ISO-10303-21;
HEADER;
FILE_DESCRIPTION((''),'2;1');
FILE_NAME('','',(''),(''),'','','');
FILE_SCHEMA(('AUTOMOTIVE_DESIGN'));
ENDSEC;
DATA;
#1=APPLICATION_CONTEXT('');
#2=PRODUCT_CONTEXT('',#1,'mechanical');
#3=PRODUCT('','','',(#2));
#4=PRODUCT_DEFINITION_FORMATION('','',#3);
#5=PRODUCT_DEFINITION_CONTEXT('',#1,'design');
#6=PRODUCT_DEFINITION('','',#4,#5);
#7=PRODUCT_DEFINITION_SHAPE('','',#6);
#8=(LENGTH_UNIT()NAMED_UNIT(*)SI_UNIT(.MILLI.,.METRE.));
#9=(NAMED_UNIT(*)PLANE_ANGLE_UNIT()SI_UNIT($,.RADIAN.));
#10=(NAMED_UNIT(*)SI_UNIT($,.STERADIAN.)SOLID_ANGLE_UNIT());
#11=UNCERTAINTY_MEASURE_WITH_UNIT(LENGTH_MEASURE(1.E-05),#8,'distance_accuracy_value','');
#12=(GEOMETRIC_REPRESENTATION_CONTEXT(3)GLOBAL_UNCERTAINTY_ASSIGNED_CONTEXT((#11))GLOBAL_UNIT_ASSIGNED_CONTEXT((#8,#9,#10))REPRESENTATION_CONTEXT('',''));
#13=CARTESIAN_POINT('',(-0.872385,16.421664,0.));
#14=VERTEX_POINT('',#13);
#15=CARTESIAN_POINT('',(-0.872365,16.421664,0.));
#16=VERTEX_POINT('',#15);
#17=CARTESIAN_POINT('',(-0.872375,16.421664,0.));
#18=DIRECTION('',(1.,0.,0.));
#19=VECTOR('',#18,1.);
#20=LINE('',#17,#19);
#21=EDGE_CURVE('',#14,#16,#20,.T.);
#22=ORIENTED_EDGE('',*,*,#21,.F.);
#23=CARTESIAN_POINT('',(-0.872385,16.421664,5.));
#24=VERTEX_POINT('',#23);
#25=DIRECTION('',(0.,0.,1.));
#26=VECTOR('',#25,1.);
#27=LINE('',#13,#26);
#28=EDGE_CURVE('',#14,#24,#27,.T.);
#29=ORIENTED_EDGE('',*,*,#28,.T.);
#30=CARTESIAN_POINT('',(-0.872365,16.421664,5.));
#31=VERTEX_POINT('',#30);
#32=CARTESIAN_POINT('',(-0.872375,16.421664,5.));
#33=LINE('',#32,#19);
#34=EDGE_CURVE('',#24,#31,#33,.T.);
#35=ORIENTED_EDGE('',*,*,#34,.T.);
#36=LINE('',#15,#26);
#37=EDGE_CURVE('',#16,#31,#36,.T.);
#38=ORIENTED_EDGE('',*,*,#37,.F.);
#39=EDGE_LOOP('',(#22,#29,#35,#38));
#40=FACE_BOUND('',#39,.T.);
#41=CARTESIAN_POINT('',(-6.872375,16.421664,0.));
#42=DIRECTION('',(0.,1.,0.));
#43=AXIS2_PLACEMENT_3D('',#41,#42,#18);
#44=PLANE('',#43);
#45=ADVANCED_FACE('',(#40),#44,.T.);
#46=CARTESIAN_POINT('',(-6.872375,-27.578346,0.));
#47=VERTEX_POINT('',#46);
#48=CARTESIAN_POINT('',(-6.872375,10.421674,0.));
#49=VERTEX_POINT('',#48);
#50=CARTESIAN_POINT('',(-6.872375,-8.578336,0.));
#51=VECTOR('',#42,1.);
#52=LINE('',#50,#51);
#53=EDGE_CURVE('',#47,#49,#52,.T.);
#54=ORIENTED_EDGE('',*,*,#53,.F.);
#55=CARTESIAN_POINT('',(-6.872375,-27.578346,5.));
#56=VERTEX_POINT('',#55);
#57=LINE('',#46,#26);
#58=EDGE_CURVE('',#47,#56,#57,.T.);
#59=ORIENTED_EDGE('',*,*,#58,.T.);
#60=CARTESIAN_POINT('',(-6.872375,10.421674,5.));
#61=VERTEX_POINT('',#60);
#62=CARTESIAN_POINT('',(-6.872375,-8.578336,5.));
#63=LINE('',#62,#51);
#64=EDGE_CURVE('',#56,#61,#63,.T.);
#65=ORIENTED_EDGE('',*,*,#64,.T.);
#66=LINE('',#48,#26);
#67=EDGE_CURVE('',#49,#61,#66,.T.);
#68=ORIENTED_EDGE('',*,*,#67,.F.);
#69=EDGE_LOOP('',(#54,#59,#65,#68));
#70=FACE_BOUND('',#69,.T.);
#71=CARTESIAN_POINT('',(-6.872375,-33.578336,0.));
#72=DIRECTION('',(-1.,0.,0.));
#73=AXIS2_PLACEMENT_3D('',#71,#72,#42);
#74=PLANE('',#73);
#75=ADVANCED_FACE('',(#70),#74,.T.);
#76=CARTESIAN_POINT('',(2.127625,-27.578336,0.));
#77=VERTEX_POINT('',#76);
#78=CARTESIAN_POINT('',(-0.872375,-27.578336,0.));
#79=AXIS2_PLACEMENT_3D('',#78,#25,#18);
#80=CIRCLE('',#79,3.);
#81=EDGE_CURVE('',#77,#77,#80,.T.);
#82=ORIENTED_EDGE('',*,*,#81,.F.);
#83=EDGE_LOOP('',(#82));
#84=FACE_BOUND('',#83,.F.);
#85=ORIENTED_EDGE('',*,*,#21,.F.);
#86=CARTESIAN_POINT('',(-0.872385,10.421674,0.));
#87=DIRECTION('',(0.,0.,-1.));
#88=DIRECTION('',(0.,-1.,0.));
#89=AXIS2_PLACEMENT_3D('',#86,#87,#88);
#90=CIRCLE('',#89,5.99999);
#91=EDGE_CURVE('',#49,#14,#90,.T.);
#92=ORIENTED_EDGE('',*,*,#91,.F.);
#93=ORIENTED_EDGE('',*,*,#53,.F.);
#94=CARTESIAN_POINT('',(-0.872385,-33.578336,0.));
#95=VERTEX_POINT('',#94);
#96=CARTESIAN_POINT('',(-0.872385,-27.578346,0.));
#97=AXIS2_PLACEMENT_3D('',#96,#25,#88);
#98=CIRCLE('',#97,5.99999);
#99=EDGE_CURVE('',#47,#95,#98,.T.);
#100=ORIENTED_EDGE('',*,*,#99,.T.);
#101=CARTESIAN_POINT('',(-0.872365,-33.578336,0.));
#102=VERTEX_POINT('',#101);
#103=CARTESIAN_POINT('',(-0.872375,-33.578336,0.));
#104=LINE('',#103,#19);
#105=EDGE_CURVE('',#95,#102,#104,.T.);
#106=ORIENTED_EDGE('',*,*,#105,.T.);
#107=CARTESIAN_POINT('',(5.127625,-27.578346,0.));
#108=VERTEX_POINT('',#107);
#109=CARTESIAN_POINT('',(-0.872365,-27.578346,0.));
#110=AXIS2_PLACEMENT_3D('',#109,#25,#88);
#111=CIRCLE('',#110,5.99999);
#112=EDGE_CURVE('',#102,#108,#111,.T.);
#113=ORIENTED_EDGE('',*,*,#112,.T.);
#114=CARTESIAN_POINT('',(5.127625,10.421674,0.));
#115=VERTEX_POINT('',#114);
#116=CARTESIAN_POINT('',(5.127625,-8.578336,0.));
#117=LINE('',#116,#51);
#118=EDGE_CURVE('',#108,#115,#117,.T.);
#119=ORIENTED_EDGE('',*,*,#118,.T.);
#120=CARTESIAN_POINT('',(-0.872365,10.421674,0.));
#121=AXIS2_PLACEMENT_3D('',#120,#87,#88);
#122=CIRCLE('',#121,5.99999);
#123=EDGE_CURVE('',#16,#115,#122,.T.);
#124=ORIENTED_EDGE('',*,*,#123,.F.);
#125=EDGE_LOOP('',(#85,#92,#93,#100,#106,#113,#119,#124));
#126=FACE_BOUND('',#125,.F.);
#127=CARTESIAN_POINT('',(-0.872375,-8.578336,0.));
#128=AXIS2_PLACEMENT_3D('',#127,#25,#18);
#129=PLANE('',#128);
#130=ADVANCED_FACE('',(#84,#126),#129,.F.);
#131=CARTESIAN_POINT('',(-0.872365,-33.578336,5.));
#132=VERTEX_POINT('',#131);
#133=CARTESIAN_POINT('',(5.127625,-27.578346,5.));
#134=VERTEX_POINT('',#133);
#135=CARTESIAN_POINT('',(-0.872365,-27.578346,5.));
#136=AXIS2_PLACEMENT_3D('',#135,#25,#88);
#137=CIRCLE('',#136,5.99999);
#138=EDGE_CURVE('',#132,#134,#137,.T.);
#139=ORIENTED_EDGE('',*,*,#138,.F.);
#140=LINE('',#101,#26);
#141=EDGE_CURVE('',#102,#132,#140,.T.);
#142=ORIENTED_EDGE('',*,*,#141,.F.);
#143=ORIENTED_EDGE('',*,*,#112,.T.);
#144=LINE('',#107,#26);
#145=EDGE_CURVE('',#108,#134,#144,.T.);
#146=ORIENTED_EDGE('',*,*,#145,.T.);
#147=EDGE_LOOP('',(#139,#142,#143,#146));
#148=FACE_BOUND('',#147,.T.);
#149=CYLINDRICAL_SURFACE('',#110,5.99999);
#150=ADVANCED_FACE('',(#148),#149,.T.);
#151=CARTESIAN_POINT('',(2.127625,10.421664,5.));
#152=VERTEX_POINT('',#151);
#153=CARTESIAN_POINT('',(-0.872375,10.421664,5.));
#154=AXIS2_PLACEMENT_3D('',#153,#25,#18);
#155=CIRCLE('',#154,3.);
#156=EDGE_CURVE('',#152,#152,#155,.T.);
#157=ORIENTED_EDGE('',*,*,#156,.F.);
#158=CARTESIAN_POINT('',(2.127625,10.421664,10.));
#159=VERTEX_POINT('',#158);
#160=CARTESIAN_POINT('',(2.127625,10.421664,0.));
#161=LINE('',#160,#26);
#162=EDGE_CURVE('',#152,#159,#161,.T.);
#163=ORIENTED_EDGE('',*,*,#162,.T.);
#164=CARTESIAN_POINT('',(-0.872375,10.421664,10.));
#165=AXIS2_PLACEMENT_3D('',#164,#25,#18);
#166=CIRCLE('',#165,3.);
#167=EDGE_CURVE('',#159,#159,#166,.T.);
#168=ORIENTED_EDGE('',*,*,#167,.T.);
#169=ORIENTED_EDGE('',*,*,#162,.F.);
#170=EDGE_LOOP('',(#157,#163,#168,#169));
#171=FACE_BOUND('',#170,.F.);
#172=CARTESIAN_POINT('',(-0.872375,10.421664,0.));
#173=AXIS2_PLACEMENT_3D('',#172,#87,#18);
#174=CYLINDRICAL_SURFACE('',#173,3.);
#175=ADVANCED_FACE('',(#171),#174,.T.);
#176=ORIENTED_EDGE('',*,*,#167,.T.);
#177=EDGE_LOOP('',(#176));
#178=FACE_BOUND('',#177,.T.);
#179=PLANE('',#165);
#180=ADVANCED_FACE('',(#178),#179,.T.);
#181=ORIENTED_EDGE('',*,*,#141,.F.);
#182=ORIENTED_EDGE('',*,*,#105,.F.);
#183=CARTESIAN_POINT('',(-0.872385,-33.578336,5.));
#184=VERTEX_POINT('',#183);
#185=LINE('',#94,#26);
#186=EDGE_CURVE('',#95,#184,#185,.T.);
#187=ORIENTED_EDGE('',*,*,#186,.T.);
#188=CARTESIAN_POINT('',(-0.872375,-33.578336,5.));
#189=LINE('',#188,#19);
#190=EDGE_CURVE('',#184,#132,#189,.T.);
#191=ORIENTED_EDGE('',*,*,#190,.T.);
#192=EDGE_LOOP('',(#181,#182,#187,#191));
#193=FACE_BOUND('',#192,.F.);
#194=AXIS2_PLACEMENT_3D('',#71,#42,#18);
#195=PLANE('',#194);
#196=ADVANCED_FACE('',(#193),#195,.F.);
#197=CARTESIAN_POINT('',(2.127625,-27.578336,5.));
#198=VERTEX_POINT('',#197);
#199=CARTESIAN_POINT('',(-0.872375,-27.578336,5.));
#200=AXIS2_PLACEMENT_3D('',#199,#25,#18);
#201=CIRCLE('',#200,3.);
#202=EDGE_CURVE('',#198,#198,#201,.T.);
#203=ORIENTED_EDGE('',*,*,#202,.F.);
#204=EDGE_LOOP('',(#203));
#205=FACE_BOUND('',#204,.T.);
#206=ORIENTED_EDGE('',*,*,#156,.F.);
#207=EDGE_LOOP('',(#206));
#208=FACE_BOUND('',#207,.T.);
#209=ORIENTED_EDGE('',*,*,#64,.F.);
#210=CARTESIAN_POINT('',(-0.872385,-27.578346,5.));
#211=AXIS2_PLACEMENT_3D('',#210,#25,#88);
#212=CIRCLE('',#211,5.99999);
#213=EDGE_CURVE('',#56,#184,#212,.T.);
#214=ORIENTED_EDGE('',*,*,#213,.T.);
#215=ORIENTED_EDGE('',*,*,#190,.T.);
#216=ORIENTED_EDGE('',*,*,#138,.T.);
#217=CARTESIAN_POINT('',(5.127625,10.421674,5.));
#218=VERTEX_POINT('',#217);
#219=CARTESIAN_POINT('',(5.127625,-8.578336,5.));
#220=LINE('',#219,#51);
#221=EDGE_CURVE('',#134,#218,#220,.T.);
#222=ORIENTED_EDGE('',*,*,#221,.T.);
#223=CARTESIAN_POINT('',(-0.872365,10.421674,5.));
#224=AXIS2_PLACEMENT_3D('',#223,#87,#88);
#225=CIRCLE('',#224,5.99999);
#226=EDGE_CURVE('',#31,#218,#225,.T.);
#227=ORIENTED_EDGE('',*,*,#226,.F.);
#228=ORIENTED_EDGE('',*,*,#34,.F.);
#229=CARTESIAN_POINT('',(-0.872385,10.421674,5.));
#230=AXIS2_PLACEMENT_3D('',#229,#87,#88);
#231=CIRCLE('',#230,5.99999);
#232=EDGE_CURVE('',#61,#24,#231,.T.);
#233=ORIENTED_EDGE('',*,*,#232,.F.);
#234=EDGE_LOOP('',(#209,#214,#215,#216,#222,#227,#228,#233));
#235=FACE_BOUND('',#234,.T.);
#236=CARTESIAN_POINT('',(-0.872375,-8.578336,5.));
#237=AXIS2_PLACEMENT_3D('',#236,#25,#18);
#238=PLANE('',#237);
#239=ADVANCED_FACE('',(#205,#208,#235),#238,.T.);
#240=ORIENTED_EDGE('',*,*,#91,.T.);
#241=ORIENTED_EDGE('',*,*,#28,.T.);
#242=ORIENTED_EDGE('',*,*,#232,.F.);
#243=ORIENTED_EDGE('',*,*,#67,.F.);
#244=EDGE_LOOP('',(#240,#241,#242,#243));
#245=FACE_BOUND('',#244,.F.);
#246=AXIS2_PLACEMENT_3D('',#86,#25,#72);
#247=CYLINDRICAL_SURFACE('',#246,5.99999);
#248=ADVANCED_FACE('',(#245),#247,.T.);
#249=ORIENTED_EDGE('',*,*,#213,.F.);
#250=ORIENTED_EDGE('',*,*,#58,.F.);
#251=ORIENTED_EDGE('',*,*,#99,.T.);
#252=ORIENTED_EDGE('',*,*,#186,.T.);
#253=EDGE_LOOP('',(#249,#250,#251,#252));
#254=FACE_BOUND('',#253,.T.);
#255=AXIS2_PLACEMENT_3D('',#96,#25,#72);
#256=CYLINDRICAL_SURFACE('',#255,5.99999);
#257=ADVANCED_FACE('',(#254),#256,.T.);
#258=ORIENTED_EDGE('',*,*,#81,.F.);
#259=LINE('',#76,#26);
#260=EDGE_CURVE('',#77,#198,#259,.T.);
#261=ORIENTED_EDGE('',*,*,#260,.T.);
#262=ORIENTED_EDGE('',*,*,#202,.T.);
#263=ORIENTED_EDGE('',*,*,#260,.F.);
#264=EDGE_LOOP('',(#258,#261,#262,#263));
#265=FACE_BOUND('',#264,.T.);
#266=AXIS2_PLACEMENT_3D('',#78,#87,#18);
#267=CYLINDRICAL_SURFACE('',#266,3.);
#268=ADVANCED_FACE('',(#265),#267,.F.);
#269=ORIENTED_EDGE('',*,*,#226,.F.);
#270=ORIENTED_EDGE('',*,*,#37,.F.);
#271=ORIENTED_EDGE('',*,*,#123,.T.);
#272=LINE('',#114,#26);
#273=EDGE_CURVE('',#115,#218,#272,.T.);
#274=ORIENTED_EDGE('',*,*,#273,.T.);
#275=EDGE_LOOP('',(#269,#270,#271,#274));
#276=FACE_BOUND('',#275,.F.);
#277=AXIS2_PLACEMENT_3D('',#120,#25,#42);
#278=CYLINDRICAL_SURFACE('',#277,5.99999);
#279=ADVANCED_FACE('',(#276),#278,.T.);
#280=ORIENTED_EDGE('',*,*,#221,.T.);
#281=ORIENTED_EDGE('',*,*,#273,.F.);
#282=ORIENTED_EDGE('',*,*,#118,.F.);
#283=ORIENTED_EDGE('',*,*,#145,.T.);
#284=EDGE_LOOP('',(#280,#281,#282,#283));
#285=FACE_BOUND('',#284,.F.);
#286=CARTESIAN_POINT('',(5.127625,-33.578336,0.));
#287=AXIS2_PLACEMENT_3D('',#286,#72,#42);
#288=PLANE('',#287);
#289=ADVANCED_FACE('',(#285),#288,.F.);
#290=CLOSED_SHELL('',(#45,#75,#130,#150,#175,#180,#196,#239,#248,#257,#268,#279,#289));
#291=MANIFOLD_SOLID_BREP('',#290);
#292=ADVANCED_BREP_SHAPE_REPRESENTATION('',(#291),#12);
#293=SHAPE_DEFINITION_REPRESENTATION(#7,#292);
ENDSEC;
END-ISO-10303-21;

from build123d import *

# Parameters (mm, degrees)
F0_W     = 12
F0_H     = 50
F0_R     = 3
F1_DEPTH = 5
F2_R     = 5.99999
F3_DEPTH = 10


# Not quite as in the source:
# - a fillet or chamfer is up to 0.001 mm smaller than in the source, because OpenCascade refuses the exact size


with BuildPart() as f1:
    # F0 (on Top) → F1 (new body)
    with BuildSketch(Plane.XY):
        with Locations((-0.8723753854, -8.5783358663)):
            Rectangle(F0_W, F0_H)
        with Locations((-0.8723753854, -27.5783358663)):
            Circle(F0_R, mode=Mode.SUBTRACT)
        with Locations((-0.8723753854, 10.4216641337)):
            Circle(F0_R, mode=Mode.SUBTRACT)
    extrude(amount=F1_DEPTH)

    # F2 (radius 6 in the source; OpenCascade refuses exactly that, so slightly less here)
    f2_edges = [f1.edges().sort_by_distance(p)[0] for p in [
        (-6.872375, 16.421664, 2.5),
        (5.127625, 16.421664, 2.5),
        (5.127625, -33.578336, 2.5),
        (-6.872375, -33.578336, 2.5),
    ]]
    fillet(f2_edges, radius=F2_R)

    # F0 (on Top) → F3 (join)
    with BuildSketch(Plane.XY):
        with Locations((-0.8723753854, 10.4216641337)):
            Circle(F0_R)
    extrude(amount=F3_DEPTH)


solid = f1.part
